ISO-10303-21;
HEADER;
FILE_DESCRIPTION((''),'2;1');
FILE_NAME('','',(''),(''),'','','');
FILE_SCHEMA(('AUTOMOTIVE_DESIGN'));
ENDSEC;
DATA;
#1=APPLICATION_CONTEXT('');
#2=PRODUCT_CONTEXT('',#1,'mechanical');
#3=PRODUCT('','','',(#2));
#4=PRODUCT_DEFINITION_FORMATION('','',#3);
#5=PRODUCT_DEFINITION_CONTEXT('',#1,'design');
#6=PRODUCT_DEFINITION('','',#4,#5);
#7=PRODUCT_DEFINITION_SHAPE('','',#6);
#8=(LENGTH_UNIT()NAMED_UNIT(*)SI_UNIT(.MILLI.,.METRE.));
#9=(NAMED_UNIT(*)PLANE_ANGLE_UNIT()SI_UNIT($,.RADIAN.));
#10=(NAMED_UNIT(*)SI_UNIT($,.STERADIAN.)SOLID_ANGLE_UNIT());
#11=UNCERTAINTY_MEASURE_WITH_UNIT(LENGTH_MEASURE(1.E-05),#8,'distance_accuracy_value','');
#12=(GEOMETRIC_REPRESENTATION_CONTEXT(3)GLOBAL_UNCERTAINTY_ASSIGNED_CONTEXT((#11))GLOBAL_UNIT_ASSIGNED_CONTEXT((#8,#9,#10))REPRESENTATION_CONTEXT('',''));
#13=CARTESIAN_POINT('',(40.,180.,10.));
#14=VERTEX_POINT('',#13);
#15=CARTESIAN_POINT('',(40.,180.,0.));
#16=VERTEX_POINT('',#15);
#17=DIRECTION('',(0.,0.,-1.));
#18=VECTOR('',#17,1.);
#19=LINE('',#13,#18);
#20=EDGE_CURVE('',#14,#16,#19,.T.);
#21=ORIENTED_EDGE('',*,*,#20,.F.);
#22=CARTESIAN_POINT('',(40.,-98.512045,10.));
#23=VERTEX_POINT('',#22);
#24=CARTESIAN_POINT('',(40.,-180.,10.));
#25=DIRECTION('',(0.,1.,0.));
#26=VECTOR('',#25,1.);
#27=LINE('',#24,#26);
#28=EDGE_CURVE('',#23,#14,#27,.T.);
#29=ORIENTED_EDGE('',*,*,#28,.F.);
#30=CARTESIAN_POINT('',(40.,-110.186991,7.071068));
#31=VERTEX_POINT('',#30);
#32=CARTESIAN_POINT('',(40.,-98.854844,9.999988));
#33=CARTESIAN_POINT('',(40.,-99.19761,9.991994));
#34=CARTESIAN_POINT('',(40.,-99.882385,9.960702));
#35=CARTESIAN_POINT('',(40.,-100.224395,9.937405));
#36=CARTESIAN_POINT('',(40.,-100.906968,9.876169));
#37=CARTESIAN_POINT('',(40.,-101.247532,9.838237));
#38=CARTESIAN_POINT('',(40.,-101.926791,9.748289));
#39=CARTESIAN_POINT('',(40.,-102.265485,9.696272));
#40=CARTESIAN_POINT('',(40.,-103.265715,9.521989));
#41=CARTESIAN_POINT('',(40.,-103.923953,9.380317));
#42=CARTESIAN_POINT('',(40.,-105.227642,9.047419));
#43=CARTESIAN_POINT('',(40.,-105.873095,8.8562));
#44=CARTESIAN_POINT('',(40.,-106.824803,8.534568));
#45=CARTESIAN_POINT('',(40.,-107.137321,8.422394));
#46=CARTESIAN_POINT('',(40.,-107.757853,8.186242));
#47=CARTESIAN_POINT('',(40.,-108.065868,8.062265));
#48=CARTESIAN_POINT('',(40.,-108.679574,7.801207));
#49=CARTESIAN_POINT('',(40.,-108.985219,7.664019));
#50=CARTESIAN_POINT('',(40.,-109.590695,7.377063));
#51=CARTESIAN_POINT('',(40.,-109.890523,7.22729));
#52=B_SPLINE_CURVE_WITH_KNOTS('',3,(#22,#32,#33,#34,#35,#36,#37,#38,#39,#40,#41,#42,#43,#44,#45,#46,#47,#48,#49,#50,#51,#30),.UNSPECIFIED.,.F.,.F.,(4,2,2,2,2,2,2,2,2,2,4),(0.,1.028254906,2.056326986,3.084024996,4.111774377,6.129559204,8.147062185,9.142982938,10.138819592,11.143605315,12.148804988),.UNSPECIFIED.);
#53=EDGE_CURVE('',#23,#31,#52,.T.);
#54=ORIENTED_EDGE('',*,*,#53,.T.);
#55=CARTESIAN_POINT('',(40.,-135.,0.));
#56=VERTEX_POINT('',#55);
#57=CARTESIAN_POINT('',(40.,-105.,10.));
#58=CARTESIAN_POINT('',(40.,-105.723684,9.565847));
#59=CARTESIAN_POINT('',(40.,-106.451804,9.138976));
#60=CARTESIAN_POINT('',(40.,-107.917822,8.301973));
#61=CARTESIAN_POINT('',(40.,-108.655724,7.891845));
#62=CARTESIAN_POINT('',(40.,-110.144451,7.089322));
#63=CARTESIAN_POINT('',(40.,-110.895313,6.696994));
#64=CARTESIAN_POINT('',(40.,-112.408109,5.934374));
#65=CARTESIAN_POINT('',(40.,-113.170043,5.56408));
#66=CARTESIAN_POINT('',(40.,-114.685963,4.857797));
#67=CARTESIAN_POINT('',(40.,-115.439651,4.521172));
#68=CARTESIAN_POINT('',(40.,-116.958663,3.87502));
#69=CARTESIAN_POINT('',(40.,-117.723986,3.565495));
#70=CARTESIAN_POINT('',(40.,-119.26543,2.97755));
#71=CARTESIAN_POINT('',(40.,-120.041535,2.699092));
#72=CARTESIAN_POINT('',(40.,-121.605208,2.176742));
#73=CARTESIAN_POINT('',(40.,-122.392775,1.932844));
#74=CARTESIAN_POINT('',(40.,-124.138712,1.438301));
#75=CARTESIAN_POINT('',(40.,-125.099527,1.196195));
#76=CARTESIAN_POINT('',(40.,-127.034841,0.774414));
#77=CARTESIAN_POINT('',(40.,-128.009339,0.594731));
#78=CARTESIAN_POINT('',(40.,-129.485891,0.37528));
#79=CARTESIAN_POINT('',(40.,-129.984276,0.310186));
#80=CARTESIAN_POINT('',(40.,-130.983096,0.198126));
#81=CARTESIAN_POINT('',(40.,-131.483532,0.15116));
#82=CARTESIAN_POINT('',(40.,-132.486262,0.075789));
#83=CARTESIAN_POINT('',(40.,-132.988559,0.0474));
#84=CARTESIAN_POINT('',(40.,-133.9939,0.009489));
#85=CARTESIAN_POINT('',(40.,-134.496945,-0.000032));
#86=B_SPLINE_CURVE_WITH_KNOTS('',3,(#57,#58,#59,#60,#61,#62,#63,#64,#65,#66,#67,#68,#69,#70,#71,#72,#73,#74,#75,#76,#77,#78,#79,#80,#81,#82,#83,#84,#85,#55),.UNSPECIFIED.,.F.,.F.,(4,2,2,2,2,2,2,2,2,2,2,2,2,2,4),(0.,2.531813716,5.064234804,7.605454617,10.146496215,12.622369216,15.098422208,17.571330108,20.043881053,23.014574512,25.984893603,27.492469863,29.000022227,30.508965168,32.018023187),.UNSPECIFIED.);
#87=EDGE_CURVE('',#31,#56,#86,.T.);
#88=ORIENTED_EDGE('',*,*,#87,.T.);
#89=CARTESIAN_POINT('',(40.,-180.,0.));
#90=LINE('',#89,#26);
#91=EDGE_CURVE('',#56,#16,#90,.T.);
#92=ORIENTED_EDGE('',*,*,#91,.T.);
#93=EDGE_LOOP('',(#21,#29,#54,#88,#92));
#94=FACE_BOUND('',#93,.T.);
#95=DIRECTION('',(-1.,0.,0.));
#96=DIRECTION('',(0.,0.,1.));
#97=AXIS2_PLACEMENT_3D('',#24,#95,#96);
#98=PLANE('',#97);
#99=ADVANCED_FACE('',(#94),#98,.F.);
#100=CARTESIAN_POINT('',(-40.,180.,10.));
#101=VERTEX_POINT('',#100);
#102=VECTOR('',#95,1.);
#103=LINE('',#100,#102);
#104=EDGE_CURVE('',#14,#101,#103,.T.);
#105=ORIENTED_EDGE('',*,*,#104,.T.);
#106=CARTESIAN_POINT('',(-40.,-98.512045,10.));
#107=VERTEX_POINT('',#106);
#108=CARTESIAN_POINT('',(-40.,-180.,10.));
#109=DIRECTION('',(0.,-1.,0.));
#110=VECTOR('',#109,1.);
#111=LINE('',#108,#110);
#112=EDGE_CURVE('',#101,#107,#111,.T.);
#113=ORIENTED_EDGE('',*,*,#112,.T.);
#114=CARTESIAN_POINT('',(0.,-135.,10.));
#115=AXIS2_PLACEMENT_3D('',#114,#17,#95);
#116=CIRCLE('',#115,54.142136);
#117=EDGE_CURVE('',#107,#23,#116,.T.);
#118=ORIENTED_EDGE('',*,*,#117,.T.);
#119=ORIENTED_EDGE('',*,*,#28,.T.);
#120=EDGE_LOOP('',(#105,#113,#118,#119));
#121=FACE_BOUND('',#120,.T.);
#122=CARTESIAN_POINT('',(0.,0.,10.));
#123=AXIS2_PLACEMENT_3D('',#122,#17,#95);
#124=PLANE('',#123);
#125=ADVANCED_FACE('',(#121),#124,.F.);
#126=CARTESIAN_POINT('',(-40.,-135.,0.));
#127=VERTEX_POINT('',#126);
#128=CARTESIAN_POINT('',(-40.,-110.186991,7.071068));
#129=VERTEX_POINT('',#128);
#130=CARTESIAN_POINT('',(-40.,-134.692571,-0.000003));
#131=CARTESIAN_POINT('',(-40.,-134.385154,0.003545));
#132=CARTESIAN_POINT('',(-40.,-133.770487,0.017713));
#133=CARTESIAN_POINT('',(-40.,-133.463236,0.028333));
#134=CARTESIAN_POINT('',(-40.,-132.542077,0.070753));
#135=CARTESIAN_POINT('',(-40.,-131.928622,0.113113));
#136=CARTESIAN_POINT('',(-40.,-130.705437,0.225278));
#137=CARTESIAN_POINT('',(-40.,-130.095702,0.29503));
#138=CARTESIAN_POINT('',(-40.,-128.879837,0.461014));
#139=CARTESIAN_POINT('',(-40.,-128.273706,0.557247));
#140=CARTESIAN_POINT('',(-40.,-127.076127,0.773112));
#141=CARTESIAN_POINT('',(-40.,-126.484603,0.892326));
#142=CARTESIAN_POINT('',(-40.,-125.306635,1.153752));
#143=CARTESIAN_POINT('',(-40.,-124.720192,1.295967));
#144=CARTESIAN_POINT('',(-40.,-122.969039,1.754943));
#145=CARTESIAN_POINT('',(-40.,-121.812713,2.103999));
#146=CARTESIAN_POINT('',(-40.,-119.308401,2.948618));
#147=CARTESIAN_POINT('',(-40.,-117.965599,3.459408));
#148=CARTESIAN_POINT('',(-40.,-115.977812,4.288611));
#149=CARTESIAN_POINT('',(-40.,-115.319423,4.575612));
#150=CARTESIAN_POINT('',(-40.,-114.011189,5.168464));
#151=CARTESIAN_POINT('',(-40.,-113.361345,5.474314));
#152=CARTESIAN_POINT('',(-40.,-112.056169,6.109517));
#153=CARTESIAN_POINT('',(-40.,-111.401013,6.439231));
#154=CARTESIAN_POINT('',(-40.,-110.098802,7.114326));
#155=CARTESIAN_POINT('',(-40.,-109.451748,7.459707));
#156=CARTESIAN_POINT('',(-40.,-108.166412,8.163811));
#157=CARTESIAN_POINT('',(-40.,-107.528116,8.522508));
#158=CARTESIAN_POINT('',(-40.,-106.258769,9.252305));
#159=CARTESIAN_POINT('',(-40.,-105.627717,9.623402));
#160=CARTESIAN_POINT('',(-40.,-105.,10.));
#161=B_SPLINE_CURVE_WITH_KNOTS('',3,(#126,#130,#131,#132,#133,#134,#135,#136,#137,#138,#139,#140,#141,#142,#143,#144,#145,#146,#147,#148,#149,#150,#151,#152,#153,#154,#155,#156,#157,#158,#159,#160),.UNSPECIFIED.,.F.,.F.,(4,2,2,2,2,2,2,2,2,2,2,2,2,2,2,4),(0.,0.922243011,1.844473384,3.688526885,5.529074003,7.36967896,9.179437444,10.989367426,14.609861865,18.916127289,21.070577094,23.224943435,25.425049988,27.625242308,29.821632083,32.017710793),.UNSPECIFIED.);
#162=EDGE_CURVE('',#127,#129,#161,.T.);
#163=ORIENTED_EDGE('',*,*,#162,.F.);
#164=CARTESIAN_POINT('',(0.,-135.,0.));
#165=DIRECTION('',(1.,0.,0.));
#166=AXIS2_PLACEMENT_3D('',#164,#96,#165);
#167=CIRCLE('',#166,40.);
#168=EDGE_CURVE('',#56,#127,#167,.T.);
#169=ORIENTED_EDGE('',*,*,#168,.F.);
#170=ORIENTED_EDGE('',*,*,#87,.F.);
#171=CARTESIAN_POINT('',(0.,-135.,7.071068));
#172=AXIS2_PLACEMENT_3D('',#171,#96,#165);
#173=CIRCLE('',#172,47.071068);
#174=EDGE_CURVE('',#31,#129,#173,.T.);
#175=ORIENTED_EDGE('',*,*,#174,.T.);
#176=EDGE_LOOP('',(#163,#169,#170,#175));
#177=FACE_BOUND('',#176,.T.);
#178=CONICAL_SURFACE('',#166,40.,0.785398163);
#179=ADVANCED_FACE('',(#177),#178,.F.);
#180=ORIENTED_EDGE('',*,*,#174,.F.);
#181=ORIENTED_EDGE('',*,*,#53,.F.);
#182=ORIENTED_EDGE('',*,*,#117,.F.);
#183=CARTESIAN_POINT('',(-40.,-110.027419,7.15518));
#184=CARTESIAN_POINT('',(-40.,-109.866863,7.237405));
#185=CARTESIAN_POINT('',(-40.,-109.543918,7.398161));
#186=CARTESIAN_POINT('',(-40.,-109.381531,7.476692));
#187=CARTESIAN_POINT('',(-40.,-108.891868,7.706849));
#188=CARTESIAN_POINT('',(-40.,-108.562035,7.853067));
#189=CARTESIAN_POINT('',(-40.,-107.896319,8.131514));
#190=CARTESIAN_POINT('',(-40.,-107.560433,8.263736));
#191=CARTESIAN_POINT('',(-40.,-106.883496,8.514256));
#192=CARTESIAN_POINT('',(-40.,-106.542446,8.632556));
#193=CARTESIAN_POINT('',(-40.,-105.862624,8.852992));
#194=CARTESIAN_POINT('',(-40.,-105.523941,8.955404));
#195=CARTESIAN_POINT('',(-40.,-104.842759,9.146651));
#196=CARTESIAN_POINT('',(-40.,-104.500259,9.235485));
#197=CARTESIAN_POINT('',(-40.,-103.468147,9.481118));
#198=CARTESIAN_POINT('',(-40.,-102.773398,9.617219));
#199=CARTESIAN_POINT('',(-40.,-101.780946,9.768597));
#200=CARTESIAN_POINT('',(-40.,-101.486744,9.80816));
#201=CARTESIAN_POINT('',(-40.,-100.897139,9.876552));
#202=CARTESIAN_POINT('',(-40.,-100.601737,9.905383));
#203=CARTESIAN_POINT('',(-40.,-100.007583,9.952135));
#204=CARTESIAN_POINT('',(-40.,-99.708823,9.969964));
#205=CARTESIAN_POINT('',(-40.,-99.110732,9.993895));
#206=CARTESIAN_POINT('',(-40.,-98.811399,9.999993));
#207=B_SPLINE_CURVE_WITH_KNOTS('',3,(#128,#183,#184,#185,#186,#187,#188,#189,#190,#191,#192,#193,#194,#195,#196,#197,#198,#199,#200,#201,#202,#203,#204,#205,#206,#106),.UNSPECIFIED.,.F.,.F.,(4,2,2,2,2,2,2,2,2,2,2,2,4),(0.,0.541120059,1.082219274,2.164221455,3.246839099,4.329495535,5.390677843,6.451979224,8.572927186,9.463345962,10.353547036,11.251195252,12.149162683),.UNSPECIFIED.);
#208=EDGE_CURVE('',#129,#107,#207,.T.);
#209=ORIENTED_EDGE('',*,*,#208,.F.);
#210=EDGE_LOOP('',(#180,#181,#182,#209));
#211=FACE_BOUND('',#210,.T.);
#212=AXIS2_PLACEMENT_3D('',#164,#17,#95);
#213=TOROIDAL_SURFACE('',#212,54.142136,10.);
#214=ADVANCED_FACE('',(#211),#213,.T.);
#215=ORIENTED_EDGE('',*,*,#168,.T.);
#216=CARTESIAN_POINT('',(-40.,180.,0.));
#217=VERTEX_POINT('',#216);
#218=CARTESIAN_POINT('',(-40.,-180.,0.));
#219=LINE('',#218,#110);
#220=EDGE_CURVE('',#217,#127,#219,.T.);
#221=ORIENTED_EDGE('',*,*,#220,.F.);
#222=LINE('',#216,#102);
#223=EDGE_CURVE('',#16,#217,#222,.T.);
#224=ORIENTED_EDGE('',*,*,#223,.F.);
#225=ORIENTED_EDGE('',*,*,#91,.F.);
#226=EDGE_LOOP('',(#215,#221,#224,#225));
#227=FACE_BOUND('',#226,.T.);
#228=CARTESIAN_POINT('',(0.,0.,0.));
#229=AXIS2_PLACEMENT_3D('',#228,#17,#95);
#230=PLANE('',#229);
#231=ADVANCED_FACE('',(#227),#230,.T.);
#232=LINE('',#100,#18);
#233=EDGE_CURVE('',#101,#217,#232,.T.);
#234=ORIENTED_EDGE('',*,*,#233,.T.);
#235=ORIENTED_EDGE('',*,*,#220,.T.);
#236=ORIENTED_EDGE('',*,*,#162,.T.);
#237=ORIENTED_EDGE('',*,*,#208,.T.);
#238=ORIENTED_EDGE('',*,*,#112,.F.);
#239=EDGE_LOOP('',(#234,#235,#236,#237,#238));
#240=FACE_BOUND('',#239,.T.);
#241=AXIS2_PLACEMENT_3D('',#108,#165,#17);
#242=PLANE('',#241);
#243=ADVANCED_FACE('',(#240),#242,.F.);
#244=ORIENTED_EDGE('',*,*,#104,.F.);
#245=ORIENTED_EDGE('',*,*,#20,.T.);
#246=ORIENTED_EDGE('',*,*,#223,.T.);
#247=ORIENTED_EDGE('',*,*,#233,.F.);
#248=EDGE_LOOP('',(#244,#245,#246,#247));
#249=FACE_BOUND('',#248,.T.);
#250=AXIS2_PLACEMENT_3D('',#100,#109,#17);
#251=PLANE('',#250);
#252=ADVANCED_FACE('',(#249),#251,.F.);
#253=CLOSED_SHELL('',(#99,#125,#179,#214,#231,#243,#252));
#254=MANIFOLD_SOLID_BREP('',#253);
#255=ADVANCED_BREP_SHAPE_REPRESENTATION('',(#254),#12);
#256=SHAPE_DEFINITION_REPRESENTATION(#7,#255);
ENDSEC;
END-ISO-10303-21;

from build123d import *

# Parameters (mm, degrees)
SKETCH1_W           = 80
SKETCH1_H           = 360
BOSS_EXTRUDE1_DEPTH = 10
CUT_EXTRUDE1_DEPTH  = 10
CHAMFER2_SIZE       = 10
FILLET1_R           = 10


with BuildPart() as part:
    # Sketch1 → Boss-Extrude1 (new body)
    with BuildSketch(Plane.XY):
        Rectangle(SKETCH1_W, SKETCH1_H)
    extrude(amount=BOSS_EXTRUDE1_DEPTH)

    # Sketch2 → Cut-Extrude1 (cut)
    with BuildSketch(Plane.XY.offset(10)):
        with BuildLine():
            Line((-40, -135), (-40, -180))
            Line((-40, -180), (40, -180))
            Line((40, -180), (40, -135))
            ThreePointArc((40, -135), (0, -95), (-40, -135))
        make_face()
    extrude(amount=-CUT_EXTRUDE1_DEPTH, mode=Mode.SUBTRACT)

    # Chamfer2
    chamfer2_edges = [part.edges().sort_by_distance(p)[0] for p in [
        (0, -95, 10),
    ]]
    chamfer(chamfer2_edges, length=CHAMFER2_SIZE - 0.0001)  # a hair under: the kernel refuses the full size

    # Fillet1
    fillet1_edges = [part.edges().sort_by_distance(p)[0] for p in [
        (0, -85.0001, 10),
    ]]
    fillet(fillet1_edges, radius=FILLET1_R)


solid = part.part
